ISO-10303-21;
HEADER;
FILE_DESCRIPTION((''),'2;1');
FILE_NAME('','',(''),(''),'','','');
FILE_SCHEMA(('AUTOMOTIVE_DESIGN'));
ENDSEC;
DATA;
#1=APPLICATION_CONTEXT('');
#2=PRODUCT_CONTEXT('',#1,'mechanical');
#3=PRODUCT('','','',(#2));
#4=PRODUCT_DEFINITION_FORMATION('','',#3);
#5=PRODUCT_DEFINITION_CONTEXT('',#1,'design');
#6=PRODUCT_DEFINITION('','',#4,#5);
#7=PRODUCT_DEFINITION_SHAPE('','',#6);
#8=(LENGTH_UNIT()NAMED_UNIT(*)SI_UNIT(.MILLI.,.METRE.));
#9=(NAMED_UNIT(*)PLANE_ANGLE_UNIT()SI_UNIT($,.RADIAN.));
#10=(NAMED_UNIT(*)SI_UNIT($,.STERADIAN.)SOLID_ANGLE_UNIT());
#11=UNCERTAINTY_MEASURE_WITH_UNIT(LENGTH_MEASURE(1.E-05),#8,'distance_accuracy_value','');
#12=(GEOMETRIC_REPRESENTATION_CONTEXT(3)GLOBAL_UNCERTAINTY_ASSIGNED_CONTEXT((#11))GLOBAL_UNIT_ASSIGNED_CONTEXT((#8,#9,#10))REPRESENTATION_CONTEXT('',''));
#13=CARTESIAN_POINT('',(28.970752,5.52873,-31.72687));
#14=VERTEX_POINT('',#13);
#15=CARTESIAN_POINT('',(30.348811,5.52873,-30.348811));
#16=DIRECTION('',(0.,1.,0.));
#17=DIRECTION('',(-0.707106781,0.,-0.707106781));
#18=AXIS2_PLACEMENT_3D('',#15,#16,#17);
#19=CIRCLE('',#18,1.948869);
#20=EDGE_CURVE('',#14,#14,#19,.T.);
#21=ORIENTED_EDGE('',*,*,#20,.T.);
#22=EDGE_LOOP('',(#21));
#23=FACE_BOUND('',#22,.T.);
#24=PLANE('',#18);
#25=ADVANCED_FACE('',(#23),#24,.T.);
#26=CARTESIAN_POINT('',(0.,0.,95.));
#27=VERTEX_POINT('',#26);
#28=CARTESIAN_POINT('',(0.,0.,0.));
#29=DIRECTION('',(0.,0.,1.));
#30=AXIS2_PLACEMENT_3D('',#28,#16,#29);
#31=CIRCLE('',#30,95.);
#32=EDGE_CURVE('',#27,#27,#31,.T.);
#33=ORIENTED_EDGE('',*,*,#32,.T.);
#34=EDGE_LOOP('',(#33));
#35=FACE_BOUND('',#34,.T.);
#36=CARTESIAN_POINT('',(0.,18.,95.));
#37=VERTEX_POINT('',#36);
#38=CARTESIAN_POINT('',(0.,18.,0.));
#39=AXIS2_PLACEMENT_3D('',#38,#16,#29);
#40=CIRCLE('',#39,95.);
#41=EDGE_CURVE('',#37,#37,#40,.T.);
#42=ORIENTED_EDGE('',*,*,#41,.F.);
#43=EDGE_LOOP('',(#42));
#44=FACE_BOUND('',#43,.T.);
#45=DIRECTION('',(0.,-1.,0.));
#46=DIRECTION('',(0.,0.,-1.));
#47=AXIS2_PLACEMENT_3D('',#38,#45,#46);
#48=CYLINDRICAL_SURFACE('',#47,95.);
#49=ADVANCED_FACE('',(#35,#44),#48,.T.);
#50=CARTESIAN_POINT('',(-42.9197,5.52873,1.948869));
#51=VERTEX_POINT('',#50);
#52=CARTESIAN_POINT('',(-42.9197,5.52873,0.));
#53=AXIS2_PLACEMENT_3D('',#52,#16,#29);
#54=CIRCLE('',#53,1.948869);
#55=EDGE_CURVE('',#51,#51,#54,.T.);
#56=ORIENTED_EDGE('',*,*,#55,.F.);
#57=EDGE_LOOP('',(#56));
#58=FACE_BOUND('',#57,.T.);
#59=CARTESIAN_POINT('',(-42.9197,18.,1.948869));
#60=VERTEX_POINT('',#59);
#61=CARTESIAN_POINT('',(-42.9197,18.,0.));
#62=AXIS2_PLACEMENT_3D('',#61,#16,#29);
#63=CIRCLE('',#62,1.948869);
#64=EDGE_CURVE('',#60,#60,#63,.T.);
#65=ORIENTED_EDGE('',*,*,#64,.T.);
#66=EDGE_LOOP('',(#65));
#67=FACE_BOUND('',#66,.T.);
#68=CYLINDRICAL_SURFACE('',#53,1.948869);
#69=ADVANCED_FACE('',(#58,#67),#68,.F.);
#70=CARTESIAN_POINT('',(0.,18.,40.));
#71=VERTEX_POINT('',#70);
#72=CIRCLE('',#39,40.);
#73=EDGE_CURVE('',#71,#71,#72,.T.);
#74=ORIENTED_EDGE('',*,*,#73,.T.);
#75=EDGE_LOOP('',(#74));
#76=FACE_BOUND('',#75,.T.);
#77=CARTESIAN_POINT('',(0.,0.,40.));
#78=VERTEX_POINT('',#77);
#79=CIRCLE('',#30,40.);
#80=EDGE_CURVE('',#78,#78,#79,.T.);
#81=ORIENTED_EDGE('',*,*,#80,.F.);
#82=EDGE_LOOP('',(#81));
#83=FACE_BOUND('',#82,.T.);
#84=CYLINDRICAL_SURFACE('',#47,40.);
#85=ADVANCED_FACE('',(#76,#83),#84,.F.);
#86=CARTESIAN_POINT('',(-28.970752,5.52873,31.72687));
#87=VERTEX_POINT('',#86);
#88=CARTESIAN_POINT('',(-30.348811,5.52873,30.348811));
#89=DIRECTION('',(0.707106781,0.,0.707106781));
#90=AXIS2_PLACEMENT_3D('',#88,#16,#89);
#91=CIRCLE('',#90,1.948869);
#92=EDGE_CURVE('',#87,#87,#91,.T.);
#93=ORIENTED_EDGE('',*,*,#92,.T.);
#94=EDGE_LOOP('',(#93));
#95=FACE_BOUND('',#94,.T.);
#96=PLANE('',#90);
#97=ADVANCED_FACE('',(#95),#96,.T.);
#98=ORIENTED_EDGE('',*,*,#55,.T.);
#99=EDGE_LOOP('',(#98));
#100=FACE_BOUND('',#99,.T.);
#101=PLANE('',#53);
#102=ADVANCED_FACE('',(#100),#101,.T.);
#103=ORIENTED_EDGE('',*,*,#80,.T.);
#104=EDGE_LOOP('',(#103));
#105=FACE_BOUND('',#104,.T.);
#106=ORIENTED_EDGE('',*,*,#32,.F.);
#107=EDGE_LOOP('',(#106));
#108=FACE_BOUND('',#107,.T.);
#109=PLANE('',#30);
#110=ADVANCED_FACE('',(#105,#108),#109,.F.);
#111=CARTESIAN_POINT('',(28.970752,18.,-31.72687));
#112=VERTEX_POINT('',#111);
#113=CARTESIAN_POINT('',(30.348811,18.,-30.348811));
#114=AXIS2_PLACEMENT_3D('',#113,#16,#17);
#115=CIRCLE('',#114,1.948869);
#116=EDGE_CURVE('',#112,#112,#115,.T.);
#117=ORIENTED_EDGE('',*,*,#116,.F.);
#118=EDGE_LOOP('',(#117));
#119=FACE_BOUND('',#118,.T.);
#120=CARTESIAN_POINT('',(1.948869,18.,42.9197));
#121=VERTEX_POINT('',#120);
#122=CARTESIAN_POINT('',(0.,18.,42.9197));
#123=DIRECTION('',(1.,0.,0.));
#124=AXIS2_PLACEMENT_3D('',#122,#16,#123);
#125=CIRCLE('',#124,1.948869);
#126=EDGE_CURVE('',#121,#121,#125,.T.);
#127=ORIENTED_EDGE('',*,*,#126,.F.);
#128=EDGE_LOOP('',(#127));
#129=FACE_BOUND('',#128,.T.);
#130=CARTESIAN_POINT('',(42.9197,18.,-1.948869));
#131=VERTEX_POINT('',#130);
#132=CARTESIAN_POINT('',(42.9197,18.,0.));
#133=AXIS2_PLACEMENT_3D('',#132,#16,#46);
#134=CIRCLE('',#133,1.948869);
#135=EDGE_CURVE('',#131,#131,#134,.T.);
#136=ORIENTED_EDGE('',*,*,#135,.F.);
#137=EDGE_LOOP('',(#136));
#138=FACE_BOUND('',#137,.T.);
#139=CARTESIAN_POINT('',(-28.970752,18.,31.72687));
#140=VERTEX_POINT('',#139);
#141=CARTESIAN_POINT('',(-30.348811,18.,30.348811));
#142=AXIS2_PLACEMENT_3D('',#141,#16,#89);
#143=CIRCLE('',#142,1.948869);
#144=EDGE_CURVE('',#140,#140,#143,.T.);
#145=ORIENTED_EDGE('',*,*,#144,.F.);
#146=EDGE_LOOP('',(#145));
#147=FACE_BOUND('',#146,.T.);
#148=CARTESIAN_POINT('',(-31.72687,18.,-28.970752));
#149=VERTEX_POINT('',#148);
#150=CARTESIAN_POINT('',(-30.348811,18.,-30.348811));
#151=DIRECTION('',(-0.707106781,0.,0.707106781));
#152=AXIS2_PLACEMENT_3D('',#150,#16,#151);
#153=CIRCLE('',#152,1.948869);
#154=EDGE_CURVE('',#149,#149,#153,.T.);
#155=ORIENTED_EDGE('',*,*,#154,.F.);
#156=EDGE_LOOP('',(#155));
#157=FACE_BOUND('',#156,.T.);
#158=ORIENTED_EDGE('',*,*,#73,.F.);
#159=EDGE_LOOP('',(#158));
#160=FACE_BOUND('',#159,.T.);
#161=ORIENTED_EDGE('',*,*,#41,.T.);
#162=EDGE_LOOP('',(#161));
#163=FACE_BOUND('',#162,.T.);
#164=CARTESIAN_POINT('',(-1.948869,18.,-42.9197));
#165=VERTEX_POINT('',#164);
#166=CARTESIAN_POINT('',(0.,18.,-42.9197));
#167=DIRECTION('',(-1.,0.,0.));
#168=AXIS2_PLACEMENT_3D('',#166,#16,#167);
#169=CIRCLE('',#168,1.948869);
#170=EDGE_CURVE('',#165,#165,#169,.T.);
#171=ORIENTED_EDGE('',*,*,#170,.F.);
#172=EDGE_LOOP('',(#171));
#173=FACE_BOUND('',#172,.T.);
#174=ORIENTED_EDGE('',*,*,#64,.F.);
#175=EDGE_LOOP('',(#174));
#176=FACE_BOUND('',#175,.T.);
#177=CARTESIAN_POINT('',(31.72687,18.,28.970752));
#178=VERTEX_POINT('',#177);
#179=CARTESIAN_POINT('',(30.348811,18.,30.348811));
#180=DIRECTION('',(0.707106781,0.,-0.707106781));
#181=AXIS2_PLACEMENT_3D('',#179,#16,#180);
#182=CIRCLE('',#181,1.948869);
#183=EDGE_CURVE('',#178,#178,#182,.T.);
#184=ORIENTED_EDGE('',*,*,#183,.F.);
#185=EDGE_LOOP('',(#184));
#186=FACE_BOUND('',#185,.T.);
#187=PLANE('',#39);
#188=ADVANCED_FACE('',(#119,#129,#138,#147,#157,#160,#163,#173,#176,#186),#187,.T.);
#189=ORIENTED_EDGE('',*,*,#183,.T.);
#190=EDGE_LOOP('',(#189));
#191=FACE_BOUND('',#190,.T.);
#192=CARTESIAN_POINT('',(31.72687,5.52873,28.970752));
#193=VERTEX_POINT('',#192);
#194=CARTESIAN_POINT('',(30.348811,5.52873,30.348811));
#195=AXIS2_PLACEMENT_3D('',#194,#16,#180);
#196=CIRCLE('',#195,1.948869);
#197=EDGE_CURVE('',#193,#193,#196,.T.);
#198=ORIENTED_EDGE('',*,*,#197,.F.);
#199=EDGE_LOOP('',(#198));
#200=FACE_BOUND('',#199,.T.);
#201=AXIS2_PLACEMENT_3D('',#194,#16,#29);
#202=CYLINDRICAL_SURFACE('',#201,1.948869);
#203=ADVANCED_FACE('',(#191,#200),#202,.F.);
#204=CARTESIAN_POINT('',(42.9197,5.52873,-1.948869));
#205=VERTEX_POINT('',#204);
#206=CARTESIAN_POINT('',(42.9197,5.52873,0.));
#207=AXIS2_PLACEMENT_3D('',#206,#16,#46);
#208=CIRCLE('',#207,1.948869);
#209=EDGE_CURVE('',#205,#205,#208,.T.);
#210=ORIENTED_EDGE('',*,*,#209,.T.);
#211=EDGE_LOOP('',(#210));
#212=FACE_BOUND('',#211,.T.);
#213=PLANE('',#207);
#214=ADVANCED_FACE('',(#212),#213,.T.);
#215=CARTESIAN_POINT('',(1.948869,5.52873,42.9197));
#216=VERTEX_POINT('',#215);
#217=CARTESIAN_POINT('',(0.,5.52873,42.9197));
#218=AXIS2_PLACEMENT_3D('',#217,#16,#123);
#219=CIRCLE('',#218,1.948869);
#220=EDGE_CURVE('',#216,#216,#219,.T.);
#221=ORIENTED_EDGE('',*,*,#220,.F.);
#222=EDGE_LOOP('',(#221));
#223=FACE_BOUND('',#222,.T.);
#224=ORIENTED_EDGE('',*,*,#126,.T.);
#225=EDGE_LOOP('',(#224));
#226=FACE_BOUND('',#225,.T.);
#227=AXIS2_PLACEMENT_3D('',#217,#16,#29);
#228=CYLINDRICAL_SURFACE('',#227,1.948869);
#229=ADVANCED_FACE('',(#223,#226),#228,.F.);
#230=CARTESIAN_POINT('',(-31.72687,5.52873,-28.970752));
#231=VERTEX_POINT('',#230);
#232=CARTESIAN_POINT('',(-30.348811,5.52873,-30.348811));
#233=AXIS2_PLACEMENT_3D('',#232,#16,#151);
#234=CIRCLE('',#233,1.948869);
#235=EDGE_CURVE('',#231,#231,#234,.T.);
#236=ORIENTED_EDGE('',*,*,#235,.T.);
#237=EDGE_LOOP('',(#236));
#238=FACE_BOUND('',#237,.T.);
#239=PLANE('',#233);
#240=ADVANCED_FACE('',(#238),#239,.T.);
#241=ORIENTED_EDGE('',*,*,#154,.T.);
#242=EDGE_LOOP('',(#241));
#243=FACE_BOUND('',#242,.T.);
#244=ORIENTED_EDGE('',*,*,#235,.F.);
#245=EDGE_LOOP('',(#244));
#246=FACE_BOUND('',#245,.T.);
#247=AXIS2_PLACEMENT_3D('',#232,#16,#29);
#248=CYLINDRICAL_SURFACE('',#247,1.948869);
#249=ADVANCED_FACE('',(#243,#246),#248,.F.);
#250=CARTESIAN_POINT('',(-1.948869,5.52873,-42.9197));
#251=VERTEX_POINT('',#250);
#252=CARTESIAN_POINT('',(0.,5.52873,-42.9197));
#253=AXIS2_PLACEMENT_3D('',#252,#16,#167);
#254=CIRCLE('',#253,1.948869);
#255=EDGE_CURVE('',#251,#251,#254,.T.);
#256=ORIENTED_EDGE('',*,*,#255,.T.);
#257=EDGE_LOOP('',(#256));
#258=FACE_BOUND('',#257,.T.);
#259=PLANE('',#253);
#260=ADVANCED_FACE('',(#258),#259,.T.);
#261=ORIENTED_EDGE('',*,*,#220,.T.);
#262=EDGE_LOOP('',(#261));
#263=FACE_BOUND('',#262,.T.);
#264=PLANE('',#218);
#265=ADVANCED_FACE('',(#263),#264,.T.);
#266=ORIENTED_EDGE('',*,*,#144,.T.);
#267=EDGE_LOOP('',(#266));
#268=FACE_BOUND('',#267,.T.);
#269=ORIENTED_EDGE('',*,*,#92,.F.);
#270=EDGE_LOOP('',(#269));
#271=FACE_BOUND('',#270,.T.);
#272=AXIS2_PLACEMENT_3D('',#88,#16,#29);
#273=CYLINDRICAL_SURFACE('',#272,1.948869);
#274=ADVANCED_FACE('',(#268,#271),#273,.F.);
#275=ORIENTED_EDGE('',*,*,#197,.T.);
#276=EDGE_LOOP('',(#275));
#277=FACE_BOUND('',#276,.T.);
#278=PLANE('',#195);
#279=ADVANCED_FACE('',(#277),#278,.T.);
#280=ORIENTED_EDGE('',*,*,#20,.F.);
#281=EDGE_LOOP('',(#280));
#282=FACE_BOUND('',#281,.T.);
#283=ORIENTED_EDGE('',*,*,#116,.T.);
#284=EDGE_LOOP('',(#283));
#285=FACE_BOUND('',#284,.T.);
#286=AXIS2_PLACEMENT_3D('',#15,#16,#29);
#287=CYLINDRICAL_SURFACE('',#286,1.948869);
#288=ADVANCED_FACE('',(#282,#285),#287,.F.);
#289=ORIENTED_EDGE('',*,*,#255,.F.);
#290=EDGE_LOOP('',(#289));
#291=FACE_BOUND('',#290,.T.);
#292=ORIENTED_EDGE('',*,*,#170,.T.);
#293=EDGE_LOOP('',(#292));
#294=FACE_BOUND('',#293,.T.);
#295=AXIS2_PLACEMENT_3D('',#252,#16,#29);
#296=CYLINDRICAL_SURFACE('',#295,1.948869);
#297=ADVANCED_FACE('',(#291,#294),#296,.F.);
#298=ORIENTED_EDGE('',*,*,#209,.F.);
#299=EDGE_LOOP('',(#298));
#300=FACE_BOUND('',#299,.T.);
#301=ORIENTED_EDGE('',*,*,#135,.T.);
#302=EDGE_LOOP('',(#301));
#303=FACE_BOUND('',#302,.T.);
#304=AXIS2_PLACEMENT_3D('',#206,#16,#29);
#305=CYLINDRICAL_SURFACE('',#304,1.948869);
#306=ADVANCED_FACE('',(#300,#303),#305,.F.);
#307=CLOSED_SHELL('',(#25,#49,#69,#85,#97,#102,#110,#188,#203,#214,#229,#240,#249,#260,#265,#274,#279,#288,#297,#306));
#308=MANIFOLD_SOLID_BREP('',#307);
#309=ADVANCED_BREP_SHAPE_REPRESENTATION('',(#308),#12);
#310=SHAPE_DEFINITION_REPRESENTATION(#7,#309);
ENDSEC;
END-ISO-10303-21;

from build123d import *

# Parameters (mm, degrees)
SKETCH1_R           = 95
BOSS_EXTRUDE1_DEPTH = 18
SKETCH2_R           = 40
CUT_EXTRUDE1_DEPTH  = 136.550728512
SKETCH3_R           = 1.948869244
CUT_EXTRUDE2_DEPTH  = 12.471269505
CIRPATTERN1_COUNT   = 8


with BuildPart() as part:
    # Sketch1 → Boss-Extrude1 (new body)
    with BuildSketch(Plane(origin=(0, 0, 0), x_dir=(1, 0, 0), z_dir=(0, 1, 0))):
        Circle(SKETCH1_R)
    extrude(amount=BOSS_EXTRUDE1_DEPTH)

    # Sketch2 → Cut-Extrude1 (cut, through all)
    with BuildSketch(Plane(origin=(0, 0, 0), x_dir=(1, 0, 0), z_dir=(0, 1, 0))):
        Circle(SKETCH2_R)
    extrude(amount=CUT_EXTRUDE1_DEPTH, mode=Mode.SUBTRACT)

    # Sketch3 → Cut-Extrude2 (cut)
    with BuildSketch(Plane(origin=(0, 18, 0), x_dir=(1, 0, 0), z_dir=(0, 1, 0))):
        with Locations((-42.919700029, 0)):
            Circle(SKETCH3_R)
    cut_extrude2 = extrude(amount=-CUT_EXTRUDE2_DEPTH, mode=Mode.SUBTRACT)

    # CirPattern1: Cut-Extrude2 ×8 about axis
    cirpattern1_axis = Axis((0, 0, 0), (0, 1, 0))
    for i in range(1, CIRPATTERN1_COUNT):
        add(cut_extrude2.rotate(cirpattern1_axis, i * 360 / CIRPATTERN1_COUNT), mode=Mode.SUBTRACT)


solid = part.part
